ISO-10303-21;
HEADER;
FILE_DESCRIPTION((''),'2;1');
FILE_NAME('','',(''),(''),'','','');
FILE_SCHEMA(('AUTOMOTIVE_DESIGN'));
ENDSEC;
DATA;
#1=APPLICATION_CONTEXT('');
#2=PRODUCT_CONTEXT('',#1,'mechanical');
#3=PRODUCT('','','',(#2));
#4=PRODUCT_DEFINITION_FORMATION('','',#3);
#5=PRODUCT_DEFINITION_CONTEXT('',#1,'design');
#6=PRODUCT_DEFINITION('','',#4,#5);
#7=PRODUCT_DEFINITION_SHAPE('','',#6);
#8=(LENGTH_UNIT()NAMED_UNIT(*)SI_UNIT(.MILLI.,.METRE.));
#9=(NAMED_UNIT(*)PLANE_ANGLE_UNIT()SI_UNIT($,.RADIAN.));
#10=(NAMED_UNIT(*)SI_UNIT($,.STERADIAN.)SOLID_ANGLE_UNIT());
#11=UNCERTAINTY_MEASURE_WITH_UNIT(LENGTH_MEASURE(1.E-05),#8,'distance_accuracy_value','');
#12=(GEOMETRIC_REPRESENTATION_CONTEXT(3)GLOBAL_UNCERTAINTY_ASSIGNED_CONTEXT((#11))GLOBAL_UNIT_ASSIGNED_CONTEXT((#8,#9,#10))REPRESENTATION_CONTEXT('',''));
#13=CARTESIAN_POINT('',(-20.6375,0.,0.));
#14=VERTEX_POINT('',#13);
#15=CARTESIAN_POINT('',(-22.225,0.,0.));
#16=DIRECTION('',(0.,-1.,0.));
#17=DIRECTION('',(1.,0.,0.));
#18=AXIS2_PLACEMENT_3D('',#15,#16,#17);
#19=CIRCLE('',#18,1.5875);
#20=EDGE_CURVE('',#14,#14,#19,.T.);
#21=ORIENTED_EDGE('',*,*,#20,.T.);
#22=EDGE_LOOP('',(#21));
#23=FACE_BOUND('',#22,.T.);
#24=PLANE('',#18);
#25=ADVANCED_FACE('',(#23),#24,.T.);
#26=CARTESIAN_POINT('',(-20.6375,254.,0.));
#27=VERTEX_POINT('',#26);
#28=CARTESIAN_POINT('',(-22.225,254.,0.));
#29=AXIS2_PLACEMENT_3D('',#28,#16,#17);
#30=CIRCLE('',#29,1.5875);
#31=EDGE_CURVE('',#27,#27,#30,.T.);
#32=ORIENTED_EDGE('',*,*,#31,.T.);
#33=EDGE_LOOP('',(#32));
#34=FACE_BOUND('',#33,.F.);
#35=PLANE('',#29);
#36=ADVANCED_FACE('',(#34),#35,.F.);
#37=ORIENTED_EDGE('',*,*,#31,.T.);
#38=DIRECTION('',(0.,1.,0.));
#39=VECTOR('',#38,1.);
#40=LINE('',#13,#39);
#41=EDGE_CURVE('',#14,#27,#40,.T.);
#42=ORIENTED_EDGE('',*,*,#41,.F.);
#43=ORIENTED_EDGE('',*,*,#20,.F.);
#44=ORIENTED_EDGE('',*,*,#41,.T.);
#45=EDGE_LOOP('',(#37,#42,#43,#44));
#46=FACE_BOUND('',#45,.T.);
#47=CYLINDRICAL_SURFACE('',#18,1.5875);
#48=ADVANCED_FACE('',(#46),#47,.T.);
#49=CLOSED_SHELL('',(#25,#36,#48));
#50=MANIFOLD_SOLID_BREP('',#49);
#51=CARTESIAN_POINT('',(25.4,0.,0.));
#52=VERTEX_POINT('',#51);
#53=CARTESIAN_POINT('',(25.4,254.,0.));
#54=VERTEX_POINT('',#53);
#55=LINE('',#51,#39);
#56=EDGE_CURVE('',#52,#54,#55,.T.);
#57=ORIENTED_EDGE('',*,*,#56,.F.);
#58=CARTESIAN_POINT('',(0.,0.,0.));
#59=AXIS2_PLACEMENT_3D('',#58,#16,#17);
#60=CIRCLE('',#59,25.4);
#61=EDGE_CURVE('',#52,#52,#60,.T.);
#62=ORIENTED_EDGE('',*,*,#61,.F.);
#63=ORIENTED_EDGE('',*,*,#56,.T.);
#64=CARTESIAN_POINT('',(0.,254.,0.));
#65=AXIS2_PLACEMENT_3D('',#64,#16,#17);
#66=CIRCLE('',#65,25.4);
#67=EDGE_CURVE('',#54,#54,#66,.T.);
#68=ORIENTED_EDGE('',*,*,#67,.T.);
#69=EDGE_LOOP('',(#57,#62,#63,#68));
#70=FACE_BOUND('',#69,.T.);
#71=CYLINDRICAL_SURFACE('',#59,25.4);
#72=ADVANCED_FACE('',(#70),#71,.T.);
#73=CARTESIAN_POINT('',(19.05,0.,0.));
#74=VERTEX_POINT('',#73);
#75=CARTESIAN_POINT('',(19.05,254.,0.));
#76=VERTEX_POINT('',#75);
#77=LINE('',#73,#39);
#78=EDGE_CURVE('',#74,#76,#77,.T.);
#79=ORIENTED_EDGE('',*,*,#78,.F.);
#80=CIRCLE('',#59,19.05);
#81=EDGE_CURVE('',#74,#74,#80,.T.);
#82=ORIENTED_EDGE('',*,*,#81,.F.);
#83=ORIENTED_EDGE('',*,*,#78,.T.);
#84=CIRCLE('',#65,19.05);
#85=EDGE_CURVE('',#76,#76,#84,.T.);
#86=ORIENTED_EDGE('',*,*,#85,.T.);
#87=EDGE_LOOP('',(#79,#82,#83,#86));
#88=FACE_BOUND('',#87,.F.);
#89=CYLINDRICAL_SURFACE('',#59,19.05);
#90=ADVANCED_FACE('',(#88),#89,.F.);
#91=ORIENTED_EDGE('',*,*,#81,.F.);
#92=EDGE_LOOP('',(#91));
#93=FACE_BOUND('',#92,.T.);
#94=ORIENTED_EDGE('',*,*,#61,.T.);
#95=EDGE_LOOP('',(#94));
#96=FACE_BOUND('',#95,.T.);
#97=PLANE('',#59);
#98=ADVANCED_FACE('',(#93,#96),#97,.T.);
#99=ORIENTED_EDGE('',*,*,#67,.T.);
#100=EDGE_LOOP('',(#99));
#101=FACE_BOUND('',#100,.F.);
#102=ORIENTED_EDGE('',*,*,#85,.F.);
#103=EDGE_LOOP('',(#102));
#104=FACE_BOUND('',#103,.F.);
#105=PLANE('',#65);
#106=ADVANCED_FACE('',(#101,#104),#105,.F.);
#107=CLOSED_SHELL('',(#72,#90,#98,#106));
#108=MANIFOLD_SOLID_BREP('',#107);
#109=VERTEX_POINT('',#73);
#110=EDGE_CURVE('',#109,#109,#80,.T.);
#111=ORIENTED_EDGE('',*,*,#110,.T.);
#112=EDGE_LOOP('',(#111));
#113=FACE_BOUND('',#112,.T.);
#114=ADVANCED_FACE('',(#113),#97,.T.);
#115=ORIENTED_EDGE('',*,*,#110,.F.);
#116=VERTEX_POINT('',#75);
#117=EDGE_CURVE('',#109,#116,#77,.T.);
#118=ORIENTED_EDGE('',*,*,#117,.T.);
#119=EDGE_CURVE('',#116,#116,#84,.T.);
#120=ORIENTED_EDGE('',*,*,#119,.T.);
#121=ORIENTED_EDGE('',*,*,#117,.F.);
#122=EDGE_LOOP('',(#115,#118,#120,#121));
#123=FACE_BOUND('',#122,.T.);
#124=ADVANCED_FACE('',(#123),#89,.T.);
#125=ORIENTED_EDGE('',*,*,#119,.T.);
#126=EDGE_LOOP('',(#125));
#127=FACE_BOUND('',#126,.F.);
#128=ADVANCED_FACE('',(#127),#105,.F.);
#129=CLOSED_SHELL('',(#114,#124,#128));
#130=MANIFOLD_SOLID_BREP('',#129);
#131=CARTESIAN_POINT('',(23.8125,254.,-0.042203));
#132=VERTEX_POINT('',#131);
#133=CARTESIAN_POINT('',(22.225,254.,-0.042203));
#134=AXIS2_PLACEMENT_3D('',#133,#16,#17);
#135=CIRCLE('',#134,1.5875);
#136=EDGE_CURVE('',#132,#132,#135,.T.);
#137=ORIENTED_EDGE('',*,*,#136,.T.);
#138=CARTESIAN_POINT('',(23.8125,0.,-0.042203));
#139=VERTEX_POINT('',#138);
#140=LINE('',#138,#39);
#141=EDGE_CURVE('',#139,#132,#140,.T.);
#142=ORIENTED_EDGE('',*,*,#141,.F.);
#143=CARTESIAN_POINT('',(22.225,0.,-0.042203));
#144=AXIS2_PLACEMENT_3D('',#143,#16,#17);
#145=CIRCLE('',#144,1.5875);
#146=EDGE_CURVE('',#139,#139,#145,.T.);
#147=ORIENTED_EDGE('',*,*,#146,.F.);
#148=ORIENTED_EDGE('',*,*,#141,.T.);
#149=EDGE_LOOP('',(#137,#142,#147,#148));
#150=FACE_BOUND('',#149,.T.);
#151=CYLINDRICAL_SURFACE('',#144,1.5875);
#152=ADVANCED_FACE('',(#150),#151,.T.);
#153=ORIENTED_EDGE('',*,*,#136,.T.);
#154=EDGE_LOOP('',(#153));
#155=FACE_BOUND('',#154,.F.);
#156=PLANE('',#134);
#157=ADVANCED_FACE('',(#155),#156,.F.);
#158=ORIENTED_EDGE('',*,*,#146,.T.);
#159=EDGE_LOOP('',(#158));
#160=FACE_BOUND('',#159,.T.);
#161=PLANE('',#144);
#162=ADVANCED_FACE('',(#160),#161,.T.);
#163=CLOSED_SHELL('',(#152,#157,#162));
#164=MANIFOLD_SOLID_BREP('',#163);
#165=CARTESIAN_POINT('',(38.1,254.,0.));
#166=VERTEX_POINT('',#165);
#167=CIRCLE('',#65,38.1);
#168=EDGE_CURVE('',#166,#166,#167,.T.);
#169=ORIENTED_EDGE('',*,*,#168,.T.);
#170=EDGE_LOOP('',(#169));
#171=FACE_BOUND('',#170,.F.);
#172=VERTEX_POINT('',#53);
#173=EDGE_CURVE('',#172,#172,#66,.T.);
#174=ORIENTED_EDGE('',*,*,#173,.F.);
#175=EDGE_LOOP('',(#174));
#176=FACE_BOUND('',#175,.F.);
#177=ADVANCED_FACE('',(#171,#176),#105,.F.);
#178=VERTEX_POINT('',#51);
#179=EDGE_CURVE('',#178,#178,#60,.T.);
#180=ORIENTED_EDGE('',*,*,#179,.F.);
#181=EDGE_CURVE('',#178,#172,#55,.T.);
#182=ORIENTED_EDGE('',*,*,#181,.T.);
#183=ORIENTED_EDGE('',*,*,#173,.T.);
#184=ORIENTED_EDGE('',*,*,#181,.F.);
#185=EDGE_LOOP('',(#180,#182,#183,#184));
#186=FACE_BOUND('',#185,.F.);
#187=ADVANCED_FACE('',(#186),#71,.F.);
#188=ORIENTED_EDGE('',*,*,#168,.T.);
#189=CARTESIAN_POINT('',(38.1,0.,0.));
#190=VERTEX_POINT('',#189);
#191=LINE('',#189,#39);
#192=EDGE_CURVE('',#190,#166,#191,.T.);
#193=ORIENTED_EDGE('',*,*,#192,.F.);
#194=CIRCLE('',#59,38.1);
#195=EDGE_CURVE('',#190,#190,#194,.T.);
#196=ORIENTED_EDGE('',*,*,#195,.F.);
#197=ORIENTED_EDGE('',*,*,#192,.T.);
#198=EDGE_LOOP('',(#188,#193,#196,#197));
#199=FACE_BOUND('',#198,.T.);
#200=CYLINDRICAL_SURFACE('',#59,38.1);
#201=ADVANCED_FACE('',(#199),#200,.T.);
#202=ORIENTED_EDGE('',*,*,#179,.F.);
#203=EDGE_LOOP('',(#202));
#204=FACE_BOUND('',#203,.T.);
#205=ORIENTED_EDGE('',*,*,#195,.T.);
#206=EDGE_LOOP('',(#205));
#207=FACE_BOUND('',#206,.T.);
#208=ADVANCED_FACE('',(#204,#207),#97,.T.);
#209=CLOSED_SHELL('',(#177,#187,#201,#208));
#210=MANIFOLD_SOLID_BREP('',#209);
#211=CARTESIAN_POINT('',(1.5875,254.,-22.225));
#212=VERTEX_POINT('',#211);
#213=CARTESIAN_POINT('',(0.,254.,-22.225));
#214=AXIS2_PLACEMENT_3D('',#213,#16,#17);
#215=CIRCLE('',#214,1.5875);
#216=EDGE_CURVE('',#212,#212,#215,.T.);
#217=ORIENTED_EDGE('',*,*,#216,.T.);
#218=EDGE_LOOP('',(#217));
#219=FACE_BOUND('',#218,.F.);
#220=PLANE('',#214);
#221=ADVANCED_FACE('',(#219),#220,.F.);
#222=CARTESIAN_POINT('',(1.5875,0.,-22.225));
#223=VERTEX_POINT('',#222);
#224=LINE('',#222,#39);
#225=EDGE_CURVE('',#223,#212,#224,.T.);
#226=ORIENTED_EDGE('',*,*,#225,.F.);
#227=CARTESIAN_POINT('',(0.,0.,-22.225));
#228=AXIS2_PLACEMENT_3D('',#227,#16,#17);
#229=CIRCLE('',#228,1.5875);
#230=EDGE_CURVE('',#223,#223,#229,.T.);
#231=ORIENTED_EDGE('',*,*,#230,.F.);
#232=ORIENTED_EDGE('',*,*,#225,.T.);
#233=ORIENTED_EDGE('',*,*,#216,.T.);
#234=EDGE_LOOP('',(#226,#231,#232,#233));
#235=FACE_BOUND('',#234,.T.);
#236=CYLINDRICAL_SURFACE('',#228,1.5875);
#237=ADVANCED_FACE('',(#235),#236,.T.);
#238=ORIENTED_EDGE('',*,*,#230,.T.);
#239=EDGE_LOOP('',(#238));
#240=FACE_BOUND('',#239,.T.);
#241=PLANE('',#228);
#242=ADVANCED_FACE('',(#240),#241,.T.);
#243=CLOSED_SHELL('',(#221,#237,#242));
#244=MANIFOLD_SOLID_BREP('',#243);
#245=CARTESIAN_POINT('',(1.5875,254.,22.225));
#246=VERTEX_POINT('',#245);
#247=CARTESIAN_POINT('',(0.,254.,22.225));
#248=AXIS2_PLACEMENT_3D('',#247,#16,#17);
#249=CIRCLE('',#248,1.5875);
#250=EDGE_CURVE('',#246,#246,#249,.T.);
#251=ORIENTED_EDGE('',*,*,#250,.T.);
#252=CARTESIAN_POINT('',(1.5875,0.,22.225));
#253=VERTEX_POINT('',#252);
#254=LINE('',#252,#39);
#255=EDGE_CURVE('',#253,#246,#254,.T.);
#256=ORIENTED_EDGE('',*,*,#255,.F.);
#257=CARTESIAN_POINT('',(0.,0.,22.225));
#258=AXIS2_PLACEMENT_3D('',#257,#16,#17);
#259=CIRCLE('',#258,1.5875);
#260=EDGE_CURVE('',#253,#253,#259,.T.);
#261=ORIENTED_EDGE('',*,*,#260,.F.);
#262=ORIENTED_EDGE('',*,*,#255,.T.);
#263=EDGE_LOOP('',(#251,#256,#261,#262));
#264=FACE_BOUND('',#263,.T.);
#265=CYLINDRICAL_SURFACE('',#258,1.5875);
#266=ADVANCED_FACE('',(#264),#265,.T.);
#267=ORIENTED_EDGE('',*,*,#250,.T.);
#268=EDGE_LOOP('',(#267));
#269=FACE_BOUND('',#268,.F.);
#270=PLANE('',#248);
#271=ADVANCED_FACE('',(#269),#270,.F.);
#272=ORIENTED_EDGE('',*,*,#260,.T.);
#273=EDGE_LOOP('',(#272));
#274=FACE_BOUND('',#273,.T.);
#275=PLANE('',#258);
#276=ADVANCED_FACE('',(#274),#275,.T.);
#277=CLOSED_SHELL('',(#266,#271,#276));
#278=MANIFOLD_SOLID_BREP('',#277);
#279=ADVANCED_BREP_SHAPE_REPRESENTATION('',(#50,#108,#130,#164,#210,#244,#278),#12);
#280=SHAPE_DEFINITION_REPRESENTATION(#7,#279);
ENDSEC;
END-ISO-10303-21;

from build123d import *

# Parameters (mm, degrees)
F2_R      = 38.1
F2_R_2    = 25.4
F4_DEPTH  = 254
F1_R      = 25.4
F1_R_2    = 19.05
F5_DEPTH  = 254
F6_START  = -25.4
F0_R      = 19.05
F6_DEPTH  = 228.6
F3_R      = 1.5875
F7_DEPTH  = 254
F8_DEPTH  = 254
F12_DEPTH = 254


with BuildPart() as f4:
    # F2 (on Front) → F4 (new body)
    with BuildSketch(Plane.XZ):
        Circle(F2_R)
        Circle(F2_R_2, mode=Mode.SUBTRACT)
    extrude(amount=-F4_DEPTH)


with BuildPart() as f5:
    # F1 (on Front) → F5 (new body)
    with BuildSketch(Plane.XZ):
        Circle(F1_R)
        Circle(F1_R_2, mode=Mode.SUBTRACT)
    extrude(amount=-F5_DEPTH)


with BuildPart() as f6:
    # F0 (on Front) → F6 (new body)
    with BuildSketch(Plane.XZ.offset(F6_START)):
        Circle(F0_R)
    extrude(amount=-F6_DEPTH)

    # F0 (on Front) → F8 (join)
    with BuildSketch(Plane.XZ):
        Circle(F0_R)
    extrude(amount=-F8_DEPTH)


with BuildPart() as f7:
    # F3 (on Front) → F7 (new body)
    with BuildSketch(Plane.XZ):
        with Locations((0, 22.225)):
            Circle(F3_R)
    extrude(amount=-F7_DEPTH)


with BuildPart() as f7b:
    # F3 (on Front) → F7, piece 2 (new body)
    with BuildSketch(Plane.XZ):
        with Locations((-22.225, 0)):
            Circle(F3_R)
    extrude(amount=-F7_DEPTH)


with BuildPart() as f7c:
    # F3 (on Front) → F7, piece 3 (new body)
    with BuildSketch(Plane.XZ):
        with Locations((22.225, -0.042203279)):
            Circle(F3_R)
    extrude(amount=-F7_DEPTH)


with BuildPart() as f7d:
    # F3 (on Front) → F7, piece 4 (new body)
    with BuildSketch(Plane.XZ):
        with Locations((0, -22.225)):
            Circle(F3_R)
    extrude(amount=-F7_DEPTH)


with BuildPart() as f10_1:
    # F10: copy of F7b
    add(f7b.part)


with BuildPart() as f12:
    # F0 (on Front) → F12 (new body)
    with BuildSketch(Plane.XZ):
        Circle(F0_R)
    extrude(amount=-F12_DEPTH)


solid = Compound([f4.part, f5.part, f7.part, f7b.part, f7c.part, f7d.part, f12.part])
